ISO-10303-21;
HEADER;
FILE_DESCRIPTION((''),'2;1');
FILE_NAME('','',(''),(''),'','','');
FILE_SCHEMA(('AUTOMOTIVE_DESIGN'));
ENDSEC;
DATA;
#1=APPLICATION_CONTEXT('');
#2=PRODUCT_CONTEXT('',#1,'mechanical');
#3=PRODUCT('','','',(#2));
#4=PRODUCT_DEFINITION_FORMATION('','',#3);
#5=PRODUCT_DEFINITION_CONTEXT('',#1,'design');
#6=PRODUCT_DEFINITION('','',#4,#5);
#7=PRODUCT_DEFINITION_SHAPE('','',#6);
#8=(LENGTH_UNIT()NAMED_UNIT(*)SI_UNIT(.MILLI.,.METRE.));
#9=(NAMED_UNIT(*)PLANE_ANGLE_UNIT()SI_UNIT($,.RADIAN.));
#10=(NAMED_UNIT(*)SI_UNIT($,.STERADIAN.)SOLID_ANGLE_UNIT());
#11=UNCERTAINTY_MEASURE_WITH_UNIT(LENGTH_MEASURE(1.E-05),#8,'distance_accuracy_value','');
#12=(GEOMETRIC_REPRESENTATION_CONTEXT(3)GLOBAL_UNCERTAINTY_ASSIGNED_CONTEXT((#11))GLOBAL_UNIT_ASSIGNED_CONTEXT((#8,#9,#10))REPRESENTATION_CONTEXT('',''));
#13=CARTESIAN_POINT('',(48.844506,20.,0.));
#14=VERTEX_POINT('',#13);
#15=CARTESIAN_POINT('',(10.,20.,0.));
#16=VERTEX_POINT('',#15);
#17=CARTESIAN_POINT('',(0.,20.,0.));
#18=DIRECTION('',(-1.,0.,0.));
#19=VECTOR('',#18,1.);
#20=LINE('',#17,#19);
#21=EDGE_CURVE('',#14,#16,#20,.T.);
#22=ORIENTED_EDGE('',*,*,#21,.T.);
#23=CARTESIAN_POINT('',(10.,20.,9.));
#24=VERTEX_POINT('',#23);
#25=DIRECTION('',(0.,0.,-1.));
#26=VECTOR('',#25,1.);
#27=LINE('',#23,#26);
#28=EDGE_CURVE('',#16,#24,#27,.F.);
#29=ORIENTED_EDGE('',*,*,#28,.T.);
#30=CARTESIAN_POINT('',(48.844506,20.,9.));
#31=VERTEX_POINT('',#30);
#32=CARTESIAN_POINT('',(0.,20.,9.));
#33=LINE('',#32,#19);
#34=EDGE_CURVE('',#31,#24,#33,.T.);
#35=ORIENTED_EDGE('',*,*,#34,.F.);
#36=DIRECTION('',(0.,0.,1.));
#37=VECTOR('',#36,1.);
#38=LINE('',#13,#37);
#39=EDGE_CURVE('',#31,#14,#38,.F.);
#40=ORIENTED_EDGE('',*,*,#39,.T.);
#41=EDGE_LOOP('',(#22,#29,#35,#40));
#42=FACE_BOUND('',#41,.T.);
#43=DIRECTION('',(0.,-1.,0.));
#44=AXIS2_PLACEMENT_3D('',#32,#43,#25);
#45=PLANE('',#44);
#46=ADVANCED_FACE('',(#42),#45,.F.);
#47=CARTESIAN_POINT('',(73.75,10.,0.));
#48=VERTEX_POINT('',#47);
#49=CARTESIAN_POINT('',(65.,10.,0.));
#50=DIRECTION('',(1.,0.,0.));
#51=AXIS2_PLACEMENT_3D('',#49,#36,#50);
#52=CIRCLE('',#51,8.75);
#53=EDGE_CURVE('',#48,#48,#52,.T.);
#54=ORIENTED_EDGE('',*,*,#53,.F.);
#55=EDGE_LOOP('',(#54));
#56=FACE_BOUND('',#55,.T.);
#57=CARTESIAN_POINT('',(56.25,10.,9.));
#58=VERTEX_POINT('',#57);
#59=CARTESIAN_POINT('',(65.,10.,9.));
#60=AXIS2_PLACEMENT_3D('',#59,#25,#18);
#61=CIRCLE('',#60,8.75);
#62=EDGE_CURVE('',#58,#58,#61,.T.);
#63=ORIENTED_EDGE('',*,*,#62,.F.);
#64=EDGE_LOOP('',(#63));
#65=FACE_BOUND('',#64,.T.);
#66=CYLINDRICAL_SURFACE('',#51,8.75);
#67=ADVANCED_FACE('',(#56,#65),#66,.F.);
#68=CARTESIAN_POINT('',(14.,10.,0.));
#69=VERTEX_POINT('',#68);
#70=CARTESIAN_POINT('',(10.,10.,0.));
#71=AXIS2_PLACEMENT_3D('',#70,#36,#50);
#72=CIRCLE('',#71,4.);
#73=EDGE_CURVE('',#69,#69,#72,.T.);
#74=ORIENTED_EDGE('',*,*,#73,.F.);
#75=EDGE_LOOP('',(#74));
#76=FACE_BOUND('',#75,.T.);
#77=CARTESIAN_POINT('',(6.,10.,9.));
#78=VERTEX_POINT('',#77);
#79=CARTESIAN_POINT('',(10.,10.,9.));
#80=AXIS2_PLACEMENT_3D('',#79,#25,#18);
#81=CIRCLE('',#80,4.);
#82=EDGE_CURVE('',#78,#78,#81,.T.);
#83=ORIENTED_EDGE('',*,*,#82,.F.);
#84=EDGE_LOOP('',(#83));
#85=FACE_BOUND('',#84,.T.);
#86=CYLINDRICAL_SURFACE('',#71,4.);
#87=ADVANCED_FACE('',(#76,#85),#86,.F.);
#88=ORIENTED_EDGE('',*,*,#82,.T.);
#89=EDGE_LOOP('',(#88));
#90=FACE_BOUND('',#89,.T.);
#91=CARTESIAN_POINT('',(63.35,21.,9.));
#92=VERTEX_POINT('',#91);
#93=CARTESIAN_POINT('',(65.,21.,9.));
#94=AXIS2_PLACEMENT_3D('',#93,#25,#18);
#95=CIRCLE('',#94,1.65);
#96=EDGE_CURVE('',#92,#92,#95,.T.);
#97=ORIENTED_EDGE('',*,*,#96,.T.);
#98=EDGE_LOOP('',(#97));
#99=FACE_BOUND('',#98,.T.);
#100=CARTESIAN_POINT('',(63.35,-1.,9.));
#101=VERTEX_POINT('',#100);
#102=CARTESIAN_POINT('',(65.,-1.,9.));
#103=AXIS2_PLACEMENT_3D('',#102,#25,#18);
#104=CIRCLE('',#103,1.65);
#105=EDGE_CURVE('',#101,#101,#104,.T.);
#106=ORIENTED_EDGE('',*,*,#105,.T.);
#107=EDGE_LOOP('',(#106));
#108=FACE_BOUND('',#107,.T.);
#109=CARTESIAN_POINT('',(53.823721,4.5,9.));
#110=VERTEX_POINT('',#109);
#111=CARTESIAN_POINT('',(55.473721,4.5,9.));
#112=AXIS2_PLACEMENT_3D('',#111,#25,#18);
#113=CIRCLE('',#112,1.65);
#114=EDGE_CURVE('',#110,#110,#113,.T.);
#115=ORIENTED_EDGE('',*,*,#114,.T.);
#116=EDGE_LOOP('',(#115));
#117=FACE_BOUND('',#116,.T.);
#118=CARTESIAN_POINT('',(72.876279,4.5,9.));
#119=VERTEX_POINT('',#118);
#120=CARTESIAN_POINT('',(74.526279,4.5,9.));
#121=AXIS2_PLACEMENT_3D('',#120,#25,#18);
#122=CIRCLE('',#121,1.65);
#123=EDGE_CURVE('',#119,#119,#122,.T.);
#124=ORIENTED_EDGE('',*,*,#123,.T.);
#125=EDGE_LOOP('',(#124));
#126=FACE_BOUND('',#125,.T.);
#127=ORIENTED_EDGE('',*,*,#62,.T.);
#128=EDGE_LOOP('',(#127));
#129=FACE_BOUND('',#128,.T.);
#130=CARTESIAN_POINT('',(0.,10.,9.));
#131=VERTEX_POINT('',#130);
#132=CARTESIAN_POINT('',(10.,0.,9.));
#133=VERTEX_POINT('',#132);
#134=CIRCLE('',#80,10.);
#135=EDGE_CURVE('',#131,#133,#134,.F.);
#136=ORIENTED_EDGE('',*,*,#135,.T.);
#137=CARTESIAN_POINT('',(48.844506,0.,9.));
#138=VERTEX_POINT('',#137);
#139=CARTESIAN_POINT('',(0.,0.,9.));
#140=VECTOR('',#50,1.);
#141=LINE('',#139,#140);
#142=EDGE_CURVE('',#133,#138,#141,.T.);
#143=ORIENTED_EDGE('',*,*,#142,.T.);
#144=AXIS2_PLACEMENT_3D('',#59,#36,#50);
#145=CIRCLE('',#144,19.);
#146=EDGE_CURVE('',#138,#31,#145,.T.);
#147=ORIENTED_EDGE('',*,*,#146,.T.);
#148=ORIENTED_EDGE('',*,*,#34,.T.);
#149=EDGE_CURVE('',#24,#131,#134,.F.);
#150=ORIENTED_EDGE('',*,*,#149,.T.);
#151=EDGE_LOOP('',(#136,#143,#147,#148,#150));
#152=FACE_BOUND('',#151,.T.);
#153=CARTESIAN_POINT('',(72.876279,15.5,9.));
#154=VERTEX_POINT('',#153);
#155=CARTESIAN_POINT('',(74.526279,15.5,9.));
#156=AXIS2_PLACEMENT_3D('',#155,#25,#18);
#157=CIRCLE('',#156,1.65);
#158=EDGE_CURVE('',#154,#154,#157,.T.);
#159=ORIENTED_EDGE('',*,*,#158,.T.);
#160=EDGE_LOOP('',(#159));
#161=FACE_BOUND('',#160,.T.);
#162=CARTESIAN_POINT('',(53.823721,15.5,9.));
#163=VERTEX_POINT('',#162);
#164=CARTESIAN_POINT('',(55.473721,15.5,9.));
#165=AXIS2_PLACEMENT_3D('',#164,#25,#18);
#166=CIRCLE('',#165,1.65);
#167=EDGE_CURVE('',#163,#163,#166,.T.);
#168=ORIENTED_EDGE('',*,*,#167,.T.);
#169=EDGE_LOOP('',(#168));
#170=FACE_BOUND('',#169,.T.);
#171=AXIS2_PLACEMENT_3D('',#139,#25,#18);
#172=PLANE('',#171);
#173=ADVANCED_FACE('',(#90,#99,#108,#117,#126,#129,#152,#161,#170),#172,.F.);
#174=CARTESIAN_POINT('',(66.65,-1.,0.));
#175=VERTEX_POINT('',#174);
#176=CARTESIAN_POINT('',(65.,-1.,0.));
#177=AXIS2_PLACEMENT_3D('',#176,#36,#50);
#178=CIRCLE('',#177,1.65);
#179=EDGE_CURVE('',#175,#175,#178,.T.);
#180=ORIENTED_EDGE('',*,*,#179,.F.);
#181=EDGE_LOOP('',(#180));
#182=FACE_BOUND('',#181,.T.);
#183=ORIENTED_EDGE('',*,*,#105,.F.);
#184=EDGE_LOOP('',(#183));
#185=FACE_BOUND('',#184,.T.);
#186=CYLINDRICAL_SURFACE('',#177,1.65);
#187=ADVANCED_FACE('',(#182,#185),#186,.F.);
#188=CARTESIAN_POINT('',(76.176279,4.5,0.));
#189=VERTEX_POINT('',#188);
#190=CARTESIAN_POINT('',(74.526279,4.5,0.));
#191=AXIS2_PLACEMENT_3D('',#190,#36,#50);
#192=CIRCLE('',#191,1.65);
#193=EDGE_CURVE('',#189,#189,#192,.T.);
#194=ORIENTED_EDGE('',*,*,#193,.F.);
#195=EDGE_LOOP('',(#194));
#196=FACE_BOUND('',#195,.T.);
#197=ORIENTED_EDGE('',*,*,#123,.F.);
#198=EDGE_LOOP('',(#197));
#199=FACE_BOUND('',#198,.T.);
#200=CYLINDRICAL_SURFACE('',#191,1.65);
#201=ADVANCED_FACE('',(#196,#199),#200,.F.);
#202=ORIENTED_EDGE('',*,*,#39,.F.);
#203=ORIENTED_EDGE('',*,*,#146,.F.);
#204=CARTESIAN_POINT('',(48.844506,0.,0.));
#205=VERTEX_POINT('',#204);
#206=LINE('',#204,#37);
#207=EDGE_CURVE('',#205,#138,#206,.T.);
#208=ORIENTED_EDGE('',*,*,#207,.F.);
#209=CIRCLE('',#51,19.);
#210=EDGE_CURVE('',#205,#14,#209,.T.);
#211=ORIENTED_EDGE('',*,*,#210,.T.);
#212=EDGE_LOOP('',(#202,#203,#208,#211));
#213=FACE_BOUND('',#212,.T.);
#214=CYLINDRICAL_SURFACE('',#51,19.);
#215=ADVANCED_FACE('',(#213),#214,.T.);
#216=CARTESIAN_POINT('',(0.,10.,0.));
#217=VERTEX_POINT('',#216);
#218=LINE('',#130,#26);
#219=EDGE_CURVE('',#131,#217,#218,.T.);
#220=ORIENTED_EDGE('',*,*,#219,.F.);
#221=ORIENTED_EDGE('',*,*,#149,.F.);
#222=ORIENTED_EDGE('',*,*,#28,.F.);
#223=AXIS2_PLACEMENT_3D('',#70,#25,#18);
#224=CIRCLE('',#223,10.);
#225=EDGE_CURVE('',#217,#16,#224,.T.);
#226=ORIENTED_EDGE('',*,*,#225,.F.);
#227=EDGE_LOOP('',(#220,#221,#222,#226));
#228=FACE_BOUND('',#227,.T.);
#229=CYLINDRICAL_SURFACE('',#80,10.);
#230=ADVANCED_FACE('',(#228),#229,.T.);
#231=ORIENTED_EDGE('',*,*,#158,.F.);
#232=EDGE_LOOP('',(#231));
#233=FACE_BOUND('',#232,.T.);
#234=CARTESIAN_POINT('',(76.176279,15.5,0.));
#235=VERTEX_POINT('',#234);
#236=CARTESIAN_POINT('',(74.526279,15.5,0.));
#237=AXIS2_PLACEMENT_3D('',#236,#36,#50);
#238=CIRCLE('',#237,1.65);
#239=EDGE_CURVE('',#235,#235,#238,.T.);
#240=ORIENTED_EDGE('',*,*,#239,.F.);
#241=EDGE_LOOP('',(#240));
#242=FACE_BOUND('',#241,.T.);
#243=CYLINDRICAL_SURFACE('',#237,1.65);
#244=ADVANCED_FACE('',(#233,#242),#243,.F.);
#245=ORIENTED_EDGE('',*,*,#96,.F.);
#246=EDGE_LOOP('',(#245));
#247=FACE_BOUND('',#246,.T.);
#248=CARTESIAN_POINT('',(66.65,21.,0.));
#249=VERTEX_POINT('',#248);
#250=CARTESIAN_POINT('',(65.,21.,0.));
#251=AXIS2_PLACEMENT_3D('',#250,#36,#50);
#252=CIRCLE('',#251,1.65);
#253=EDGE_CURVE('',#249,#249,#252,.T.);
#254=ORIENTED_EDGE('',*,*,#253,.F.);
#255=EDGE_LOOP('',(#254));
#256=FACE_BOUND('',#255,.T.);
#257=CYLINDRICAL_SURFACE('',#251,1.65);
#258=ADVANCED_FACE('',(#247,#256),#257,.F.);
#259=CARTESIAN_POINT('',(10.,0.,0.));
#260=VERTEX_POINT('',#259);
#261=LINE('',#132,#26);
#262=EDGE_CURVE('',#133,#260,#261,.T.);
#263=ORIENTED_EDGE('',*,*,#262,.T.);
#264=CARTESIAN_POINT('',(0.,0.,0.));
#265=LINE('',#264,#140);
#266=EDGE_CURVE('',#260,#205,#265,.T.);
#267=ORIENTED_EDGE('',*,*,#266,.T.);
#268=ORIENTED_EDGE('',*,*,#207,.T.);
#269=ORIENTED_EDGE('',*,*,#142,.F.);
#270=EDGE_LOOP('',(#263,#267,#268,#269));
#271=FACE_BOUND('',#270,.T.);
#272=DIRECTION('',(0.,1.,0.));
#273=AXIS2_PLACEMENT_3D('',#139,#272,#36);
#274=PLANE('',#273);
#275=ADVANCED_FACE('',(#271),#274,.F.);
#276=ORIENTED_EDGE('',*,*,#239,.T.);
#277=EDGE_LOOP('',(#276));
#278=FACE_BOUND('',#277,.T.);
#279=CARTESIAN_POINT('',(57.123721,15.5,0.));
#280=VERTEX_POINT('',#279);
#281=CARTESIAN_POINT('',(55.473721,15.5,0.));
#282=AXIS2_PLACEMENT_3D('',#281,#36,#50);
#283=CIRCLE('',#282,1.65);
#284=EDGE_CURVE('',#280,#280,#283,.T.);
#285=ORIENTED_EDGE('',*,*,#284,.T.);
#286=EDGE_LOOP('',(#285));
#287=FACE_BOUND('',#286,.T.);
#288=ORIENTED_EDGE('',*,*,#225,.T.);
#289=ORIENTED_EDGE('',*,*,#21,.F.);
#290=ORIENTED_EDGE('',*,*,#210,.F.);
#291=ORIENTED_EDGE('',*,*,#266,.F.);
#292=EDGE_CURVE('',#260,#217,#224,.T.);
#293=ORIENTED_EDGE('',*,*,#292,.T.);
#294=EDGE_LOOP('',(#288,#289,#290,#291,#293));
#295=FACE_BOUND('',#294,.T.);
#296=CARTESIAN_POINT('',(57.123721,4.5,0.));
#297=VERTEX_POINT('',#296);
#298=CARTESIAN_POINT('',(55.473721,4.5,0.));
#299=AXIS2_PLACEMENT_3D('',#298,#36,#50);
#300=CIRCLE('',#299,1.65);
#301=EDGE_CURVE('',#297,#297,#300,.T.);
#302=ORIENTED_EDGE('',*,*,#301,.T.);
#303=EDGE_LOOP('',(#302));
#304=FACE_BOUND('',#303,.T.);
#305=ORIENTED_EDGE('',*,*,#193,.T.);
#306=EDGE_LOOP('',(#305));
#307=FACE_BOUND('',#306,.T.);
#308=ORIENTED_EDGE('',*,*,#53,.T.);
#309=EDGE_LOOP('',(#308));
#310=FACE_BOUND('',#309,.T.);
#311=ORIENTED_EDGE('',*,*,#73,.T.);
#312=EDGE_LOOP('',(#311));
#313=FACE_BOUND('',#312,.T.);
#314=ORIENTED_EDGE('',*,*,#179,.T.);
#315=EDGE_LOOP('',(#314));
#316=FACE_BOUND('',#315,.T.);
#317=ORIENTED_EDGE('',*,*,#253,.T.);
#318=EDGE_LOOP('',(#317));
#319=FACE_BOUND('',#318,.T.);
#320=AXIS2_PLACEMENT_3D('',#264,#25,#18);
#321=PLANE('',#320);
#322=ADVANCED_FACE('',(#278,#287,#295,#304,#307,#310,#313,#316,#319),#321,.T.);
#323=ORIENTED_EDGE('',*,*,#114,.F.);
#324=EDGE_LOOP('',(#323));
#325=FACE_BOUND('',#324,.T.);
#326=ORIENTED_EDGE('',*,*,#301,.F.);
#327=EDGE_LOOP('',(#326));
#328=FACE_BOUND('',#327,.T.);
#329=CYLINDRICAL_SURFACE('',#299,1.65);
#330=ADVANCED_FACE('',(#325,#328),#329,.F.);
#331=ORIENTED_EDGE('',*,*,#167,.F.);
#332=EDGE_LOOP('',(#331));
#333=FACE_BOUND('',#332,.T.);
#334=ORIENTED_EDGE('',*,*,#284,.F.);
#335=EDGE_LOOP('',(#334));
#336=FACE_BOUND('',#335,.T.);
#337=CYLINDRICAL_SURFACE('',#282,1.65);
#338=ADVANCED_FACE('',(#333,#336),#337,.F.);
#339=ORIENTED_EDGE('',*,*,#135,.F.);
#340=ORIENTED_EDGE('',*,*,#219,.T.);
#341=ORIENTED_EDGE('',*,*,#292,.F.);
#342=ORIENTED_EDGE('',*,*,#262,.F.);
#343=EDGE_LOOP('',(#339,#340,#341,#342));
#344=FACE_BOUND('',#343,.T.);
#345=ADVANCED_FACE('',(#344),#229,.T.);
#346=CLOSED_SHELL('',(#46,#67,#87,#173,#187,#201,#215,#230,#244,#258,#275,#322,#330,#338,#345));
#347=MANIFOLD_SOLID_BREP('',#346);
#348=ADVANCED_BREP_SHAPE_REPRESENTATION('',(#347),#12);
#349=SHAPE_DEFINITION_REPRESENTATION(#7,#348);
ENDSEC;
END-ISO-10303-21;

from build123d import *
from build123d.topology import SkipClean

# Parameters (mm, degrees)
ESQUISSE1_W                  = 50
ESQUISSE1_H                  = 20
BOSS_EXTRU_1_DEPTH           = 9
ESQUISSE2_W                  = 30
ESQUISSE2_H                  = 30
BOSS_EXTRU_2_DEPTH           = 9
ENL_V_MAT_EXTRU_1_DEPTH      = 85.297093663
ENL_V_MAT_EXTRU_1_DEPTH_BACK = 85.297093663
ESQUISSE3_R                  = 8.75
ESQUISSE3_R_2                = 1.65
ENL_V_MAT_EXTRU_2_DEPTH      = 85.297093663
ENL_V_MAT_EXTRU_2_DEPTH_BACK = 85.297093663
ESQUISSE4_R                  = 4
CONG_1_R                     = 10
ESQUISSE6_R                  = 19
ESQUISSE6_R_2                = 14
BOSS_EXTRU_3_DEPTH           = 9
ENL_V_MAT_EXTRU_4_DEPTH      = 90.319650693


with BuildPart() as part:
    # Esquisse1 → Boss.-Extru.1 (new body)
    with BuildSketch(Plane.XY):
        with Locations((25, 10)):
            Rectangle(ESQUISSE1_W, ESQUISSE1_H)
    extrude(amount=BOSS_EXTRU_1_DEPTH)

    # Esquisse2 → Boss.-Extru.2 (add)
    with BuildSketch(Plane.XY.offset(9)):
        with Locations((65, 10)):
            Rectangle(ESQUISSE2_W, ESQUISSE2_H)
    extrude(amount=-BOSS_EXTRU_2_DEPTH)

    # Esquisse3 → Enlèv. mat.-Extru.1 (cut, two sides: drawn at the far end of the back side and taken through both)
    with BuildSketch(Plane.XY.offset(9).offset(-ENL_V_MAT_EXTRU_1_DEPTH_BACK)):
        with Locations((65, 10)):
            Circle(ESQUISSE3_R)
        with Locations((65, -1)):
            Circle(ESQUISSE3_R_2)
        with Locations((55.473720558, 4.5)):
            Circle(ESQUISSE3_R_2)
        with Locations((55.473720558, 15.5)):
            Circle(ESQUISSE3_R_2)
        with Locations((65, 21)):
            Circle(ESQUISSE3_R_2)
        with Locations((74.526279442, 15.5)):
            Circle(ESQUISSE3_R_2)
        with Locations((74.526279442, 4.5)):
            Circle(ESQUISSE3_R_2)
    extrude(amount=ENL_V_MAT_EXTRU_1_DEPTH + ENL_V_MAT_EXTRU_1_DEPTH_BACK, mode=Mode.SUBTRACT)

    # Esquisse4 → Enlèv. mat.-Extru.2 (cut, two sides: drawn at the far end of the back side and taken through both)
    with BuildSketch(Plane.XY.offset(9).offset(-ENL_V_MAT_EXTRU_2_DEPTH_BACK)):
        with Locations((10, 10)):
            Circle(ESQUISSE4_R)
    extrude(amount=ENL_V_MAT_EXTRU_2_DEPTH + ENL_V_MAT_EXTRU_2_DEPTH_BACK, mode=Mode.SUBTRACT)

    # Congé1
    cong_1_edges = [part.edges().sort_by_distance(p)[0] for p in [
        (0, 0, 4.5),
        (0, 20, 4.5),
    ]]
    fillet(cong_1_edges, radius=CONG_1_R - 0.0001)  # a hair under: the kernel refuses the full size

    # Esquisse6 → Boss.-Extru.3 (add)
    with BuildSketch(Plane.XY.offset(9)):
        with Locations((65, 10)):
            Circle(ESQUISSE6_R)
        with Locations((65, 10)):
            Circle(ESQUISSE6_R_2, mode=Mode.SUBTRACT)
    extrude(amount=-BOSS_EXTRU_3_DEPTH)

    # Esquisse7 → Enlèv. mat.-Extru.4 (cut, through all)
    with SkipClean():  # the faces are left unmerged after this step: merging them gives an invalid solid
        with BuildSketch(Plane.XY.offset(9)):
            with BuildLine():
                Line((48.844505579, 0), (48.844505579, -10.5))
                Line((48.844505579, -10.5), (84.844505579, -10.5))
                Line((84.844505579, -10.5), (84.844505579, 30.5))
                Line((84.844505579, 30.5), (48.844505579, 30.5))
                Line((48.844505579, 30.5), (48.844505579, 20))
                ThreePointArc((48.844505579, 20), (84, 10), (48.844505579, 0))
            make_face()
        extrude(amount=-ENL_V_MAT_EXTRU_4_DEPTH, mode=Mode.SUBTRACT)


solid = part.part
